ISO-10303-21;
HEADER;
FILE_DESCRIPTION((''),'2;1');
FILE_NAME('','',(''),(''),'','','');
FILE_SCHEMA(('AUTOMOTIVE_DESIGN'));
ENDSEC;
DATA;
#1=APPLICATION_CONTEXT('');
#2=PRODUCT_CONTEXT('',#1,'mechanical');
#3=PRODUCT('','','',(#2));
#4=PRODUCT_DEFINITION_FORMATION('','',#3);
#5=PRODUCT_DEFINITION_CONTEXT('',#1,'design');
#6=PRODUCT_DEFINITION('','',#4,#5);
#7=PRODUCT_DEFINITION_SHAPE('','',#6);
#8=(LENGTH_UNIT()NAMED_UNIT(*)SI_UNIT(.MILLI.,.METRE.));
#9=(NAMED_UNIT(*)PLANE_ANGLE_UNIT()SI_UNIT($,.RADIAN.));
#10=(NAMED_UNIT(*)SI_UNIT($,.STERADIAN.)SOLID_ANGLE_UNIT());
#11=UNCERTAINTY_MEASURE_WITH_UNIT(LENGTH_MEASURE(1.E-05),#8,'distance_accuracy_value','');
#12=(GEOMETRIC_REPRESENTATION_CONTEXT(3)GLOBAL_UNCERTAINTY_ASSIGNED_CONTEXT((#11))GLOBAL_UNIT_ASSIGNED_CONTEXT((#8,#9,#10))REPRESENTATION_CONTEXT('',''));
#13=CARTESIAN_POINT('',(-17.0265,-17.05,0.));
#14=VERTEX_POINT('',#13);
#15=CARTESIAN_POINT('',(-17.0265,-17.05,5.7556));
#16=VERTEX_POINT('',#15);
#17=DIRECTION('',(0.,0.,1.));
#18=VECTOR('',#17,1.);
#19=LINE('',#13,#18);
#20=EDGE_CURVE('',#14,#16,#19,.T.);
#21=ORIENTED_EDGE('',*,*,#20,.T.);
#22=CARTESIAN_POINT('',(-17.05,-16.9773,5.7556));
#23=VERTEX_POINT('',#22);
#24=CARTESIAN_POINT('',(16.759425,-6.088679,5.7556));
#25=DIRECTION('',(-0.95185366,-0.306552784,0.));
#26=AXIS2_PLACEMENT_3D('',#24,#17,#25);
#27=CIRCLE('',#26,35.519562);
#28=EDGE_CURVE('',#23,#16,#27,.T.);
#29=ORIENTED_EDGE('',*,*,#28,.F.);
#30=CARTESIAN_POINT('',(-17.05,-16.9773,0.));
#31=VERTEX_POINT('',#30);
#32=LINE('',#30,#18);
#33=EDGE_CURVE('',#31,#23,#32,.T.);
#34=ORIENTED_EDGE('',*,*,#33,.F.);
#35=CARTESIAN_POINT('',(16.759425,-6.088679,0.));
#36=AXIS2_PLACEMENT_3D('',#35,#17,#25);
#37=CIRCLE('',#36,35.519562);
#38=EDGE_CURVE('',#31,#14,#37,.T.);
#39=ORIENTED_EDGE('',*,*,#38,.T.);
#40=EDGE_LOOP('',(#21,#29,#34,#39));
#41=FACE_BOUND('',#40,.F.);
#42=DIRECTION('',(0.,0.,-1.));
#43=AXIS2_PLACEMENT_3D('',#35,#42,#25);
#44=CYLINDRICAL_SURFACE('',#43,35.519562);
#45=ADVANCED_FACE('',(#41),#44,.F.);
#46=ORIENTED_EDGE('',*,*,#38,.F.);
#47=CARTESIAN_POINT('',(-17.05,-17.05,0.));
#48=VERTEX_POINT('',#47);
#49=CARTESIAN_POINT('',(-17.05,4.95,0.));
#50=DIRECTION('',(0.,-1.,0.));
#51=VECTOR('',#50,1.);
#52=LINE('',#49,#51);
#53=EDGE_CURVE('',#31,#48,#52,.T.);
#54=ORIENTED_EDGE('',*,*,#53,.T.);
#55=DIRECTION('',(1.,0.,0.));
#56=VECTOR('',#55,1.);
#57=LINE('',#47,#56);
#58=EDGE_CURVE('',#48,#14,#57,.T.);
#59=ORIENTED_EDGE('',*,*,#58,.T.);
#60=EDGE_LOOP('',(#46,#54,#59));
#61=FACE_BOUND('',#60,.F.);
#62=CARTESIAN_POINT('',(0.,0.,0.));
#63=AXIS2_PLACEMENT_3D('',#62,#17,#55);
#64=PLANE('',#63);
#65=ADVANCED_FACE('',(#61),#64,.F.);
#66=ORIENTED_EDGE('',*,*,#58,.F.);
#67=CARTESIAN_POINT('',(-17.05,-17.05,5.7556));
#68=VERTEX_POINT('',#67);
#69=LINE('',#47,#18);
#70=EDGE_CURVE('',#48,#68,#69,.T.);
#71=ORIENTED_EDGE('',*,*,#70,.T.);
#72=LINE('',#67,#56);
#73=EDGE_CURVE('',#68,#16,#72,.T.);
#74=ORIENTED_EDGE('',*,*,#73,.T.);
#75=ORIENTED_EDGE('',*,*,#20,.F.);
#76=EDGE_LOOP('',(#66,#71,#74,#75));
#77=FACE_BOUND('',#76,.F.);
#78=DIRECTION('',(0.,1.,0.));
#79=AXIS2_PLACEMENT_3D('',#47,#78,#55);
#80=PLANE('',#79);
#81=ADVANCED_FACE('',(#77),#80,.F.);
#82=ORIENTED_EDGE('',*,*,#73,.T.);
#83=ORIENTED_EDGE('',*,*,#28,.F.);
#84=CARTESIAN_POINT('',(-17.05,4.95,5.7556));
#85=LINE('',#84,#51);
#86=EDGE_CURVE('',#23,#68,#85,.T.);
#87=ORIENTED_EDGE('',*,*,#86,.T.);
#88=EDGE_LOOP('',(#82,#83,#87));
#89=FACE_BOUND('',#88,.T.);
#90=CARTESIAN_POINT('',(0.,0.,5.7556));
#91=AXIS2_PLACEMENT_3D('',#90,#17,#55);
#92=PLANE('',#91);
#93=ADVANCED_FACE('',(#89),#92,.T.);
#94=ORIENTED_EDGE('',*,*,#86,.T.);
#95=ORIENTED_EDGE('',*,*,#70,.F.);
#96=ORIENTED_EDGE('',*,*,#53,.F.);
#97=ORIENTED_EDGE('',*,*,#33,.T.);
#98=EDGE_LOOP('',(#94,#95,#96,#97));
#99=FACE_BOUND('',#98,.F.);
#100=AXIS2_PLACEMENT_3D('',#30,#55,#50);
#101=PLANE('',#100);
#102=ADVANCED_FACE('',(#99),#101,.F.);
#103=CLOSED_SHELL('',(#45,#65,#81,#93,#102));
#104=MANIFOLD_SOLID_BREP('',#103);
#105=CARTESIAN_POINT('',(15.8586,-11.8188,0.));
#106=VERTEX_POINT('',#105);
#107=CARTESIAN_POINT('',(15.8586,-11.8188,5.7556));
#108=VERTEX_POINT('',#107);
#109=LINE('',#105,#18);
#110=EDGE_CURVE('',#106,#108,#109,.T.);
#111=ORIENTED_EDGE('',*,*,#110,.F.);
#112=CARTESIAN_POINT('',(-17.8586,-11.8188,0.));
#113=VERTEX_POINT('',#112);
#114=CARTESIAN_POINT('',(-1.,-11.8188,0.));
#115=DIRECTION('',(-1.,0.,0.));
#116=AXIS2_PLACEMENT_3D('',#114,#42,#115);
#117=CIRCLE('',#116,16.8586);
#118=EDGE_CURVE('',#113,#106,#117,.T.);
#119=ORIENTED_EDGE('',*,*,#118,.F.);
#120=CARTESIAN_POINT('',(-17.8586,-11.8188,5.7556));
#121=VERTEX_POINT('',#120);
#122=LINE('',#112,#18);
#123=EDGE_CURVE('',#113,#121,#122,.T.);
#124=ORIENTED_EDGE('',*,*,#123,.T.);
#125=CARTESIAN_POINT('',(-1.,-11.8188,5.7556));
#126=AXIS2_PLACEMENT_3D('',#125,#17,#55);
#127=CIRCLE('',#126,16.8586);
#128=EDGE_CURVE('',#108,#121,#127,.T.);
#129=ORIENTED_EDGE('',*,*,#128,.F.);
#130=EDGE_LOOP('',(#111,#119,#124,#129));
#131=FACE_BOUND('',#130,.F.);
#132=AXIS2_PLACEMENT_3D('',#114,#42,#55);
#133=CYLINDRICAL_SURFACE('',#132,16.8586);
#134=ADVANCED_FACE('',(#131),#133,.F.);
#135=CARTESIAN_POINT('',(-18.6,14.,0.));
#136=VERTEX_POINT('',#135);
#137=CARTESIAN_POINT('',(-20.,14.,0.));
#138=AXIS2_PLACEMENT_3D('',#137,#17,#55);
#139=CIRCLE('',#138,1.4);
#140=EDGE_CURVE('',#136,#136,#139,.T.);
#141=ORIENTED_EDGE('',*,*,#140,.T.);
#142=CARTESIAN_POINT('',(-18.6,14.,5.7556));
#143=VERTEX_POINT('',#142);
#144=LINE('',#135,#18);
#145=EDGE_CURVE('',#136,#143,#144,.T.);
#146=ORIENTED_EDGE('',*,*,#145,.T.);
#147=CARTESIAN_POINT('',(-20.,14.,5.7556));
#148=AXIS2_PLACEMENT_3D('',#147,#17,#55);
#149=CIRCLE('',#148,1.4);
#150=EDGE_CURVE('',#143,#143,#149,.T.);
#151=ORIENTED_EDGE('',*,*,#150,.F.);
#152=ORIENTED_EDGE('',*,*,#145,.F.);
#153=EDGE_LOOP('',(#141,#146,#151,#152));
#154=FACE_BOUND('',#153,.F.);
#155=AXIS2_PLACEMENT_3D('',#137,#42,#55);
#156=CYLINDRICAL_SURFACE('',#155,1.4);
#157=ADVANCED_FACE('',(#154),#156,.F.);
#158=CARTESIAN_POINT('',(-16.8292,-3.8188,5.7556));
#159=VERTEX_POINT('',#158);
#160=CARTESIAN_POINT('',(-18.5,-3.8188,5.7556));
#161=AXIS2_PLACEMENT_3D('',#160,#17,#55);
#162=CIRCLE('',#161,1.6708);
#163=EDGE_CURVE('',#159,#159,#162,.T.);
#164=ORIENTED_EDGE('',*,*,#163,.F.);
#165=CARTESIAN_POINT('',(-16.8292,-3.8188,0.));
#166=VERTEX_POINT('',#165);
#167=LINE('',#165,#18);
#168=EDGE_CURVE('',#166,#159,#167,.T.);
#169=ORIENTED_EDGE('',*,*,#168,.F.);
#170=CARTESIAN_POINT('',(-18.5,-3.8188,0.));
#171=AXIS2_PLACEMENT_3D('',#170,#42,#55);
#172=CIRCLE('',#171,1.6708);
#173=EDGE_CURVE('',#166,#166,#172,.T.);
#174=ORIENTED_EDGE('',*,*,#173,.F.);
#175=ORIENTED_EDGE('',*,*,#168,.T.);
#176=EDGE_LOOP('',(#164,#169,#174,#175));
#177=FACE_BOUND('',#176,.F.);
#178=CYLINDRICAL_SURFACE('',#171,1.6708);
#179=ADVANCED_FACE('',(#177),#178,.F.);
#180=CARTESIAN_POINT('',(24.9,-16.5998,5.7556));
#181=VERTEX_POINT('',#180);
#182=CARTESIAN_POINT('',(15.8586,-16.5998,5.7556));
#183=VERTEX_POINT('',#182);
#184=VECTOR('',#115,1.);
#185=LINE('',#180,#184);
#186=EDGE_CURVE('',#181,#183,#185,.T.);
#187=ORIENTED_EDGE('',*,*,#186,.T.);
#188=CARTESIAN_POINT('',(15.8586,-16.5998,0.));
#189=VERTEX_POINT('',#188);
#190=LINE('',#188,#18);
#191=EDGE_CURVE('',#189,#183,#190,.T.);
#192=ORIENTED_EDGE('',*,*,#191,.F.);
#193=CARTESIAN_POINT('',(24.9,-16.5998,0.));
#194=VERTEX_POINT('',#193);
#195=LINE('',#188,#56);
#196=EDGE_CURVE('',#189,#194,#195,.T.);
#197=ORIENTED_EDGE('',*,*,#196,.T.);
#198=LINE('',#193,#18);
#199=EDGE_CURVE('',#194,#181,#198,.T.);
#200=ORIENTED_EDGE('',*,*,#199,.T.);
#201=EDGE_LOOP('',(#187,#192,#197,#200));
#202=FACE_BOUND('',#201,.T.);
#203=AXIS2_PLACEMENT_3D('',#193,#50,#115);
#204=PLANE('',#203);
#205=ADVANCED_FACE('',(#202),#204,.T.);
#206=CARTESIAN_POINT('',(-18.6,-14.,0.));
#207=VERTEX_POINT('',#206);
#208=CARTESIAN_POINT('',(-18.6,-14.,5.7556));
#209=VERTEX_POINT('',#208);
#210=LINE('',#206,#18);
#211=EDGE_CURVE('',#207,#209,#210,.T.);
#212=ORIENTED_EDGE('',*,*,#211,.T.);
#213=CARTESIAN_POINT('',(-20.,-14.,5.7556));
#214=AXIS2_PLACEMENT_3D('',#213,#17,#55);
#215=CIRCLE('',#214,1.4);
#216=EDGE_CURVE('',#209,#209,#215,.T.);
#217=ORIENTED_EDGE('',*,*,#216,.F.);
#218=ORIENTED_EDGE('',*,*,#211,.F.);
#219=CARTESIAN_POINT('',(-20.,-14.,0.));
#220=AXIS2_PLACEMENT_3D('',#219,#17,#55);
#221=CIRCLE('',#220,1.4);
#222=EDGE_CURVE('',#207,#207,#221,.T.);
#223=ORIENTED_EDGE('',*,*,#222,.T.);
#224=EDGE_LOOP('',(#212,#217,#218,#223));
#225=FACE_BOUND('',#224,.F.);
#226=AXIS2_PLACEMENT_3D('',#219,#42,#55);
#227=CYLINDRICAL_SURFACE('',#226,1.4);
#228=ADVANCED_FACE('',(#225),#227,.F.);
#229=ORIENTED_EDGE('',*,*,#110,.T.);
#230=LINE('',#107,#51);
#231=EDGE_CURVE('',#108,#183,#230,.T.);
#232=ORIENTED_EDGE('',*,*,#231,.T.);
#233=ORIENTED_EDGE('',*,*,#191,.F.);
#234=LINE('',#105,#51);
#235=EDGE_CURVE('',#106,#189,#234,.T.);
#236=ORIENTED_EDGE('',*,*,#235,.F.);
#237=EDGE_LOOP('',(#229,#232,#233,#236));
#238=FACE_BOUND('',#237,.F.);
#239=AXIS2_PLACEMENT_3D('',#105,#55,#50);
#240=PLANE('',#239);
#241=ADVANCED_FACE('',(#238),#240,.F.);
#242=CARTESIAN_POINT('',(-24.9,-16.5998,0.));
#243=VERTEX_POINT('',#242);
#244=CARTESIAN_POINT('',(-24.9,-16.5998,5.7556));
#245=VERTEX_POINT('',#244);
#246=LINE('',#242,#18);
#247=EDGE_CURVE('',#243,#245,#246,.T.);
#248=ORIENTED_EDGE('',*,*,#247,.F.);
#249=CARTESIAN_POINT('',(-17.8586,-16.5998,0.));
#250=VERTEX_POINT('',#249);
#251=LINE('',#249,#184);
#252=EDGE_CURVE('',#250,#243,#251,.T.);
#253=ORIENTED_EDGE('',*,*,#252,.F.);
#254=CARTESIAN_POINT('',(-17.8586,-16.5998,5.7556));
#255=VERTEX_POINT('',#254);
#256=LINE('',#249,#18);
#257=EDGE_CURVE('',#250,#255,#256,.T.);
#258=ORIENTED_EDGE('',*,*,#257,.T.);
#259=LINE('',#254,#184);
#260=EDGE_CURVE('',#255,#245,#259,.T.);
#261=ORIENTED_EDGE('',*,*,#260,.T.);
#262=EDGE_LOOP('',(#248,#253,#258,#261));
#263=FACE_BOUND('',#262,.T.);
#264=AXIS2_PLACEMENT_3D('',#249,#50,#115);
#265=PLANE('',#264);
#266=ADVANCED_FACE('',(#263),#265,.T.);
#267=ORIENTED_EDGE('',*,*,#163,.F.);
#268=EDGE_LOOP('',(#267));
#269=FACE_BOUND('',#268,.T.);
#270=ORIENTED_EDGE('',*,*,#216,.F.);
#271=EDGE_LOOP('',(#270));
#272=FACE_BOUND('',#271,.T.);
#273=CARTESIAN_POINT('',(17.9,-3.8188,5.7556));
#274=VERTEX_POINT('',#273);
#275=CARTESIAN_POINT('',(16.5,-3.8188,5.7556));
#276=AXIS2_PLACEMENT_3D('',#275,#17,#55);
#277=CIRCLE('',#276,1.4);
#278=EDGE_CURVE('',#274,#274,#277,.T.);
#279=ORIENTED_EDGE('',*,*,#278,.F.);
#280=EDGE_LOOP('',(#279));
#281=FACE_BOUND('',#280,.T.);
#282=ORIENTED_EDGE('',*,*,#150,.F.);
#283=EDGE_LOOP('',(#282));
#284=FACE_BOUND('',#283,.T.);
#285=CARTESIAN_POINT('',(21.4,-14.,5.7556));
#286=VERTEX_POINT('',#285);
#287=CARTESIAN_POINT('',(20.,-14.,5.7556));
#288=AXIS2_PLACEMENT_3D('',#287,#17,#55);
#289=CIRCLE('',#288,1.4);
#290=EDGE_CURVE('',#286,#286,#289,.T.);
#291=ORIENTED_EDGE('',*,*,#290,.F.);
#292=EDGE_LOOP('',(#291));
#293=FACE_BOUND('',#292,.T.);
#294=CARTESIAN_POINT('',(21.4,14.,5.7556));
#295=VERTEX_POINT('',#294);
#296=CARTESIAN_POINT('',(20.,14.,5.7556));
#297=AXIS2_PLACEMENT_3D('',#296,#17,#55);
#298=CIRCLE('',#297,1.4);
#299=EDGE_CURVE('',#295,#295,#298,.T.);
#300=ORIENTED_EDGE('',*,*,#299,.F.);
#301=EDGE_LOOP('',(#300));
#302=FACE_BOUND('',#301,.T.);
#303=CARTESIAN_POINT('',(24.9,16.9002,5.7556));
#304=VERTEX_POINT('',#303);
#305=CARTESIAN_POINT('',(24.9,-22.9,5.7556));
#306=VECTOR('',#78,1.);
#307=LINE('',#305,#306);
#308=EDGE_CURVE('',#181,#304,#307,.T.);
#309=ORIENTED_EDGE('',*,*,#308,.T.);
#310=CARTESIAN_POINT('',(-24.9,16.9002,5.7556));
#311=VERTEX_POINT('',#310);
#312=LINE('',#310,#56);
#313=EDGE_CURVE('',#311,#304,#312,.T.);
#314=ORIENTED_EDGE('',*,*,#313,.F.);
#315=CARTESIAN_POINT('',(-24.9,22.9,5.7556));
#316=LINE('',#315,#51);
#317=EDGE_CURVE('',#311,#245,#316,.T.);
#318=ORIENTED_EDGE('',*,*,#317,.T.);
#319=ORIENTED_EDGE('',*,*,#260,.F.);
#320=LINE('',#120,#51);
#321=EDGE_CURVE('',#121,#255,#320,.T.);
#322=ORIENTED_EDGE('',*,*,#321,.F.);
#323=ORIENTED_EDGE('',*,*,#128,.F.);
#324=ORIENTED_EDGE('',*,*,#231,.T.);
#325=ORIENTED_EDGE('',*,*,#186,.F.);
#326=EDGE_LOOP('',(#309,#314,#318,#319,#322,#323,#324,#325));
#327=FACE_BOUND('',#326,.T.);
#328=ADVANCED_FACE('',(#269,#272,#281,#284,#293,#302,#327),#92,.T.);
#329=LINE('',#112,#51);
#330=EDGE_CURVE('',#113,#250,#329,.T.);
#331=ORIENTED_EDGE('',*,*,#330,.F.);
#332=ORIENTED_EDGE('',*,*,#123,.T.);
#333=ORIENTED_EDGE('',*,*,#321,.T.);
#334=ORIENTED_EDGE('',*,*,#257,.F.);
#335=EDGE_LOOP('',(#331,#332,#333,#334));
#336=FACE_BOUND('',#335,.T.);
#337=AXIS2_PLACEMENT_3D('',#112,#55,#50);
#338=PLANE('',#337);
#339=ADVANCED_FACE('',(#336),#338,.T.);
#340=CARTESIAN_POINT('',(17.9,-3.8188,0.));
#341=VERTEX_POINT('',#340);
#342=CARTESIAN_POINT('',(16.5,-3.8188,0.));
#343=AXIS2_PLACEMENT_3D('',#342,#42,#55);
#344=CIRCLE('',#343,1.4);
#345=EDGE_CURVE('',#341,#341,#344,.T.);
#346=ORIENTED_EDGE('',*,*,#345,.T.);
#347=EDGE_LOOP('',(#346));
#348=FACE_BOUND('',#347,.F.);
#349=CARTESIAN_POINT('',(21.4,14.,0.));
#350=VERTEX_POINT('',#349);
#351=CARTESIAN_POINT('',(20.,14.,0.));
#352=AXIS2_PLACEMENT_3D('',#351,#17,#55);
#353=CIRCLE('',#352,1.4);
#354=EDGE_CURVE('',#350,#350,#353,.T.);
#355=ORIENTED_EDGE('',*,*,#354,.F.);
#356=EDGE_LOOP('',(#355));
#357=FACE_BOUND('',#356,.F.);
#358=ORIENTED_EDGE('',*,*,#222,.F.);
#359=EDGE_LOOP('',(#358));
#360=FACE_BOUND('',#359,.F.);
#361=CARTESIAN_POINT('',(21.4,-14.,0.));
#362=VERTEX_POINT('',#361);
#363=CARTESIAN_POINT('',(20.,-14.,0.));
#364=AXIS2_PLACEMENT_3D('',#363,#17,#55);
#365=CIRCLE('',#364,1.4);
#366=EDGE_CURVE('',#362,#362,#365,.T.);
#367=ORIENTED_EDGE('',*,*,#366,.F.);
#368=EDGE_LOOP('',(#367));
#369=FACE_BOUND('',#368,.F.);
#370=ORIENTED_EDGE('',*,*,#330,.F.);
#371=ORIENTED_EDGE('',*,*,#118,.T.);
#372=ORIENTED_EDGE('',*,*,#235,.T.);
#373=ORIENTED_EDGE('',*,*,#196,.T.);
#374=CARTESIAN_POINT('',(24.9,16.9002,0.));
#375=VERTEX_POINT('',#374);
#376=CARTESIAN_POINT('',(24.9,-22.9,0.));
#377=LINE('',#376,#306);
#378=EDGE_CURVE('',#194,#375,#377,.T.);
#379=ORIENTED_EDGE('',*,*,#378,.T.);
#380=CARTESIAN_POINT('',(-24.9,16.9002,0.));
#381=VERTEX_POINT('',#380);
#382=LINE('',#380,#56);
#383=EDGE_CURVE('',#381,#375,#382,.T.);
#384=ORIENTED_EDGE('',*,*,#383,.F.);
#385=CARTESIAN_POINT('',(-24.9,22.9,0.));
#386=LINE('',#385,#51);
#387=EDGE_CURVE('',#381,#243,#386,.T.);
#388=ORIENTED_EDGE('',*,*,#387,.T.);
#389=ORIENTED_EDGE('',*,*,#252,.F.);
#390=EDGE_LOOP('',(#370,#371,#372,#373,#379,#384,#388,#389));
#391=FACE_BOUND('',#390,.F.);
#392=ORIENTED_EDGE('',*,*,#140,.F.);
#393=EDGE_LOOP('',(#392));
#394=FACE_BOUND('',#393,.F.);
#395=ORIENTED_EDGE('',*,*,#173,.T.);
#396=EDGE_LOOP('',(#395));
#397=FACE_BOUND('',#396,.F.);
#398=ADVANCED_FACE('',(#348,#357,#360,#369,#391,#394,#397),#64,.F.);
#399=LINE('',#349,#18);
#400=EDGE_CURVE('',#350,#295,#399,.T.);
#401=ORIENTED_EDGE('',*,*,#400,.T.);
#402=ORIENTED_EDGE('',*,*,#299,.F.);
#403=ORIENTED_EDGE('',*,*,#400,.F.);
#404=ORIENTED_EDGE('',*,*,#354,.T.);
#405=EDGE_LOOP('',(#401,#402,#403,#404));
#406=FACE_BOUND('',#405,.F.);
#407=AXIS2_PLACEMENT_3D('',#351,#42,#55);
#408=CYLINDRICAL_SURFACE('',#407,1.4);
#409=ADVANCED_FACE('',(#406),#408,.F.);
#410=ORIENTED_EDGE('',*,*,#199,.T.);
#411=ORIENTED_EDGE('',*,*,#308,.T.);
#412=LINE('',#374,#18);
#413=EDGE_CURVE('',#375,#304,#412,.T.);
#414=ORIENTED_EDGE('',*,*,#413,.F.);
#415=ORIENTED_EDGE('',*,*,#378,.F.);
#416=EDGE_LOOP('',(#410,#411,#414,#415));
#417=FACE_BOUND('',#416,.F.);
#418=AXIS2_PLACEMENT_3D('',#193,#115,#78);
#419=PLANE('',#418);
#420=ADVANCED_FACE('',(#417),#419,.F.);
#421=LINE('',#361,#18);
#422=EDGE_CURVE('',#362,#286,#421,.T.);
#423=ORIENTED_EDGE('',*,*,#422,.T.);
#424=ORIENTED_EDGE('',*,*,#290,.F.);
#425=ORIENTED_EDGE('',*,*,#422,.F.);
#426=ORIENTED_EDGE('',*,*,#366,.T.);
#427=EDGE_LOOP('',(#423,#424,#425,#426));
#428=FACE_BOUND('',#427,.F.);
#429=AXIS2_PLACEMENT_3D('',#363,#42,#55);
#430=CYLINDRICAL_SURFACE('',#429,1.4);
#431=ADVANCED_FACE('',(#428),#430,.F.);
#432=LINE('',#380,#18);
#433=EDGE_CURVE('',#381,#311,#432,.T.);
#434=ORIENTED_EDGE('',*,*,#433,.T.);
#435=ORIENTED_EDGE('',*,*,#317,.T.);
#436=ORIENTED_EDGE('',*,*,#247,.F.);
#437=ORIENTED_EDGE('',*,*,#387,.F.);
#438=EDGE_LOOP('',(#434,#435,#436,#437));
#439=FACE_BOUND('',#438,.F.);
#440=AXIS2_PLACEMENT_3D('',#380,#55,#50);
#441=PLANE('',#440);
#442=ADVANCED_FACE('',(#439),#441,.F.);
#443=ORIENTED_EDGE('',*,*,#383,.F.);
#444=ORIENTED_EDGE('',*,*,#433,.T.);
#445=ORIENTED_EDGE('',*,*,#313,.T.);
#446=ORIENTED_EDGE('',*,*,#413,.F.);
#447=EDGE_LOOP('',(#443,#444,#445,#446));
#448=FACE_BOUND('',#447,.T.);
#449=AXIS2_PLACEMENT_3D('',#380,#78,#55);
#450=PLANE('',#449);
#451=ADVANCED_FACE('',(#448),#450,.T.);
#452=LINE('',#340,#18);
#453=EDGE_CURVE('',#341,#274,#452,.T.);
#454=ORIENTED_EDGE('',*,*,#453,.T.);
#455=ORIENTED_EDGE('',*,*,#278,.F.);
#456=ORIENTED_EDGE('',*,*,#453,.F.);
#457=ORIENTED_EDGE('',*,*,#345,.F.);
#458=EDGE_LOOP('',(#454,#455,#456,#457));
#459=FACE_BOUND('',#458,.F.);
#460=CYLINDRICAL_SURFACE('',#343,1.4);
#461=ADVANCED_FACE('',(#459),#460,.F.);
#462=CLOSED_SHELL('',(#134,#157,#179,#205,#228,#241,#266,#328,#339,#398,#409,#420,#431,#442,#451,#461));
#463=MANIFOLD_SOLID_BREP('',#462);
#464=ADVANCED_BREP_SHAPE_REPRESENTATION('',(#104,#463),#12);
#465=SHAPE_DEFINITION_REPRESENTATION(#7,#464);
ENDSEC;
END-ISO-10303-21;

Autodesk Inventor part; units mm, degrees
ref_plane "YZ Plane" through (0, 0, 0) normal (1, 0, 0) x (0, 1, 0)
ref_plane "Work Plane1" through (0, 0, 0) normal (0, 0, 1) x (1, 0, 0)
sketch "Sketch1" plane through (0, 0, 0) normal (0, 0, 1) x (1, 0, 0)
  circle A0 centre (-20, 14) radius 1.4 projected
  circle A1 centre (-20, -14) radius 1.4 projected
  circle A2 centre (20, -14) radius 1.4 projected
  circle A3 centre (20, 14) radius 1.4 projected
  line L0 (-24.9, 22.9) -> (-24.9, -22.9) projected
  line L1 (24.9, -22.9) -> (24.9, 22.9) projected
  line L2 (-24.9, 16.9002) -> (24.9, 16.9002)
  line L3 (24.9, 16.9002) -> (24.9, -16.5998)
  line L4 (-24.9, -16.5998) -> (-24.9, 16.9002)
  line L5 (-17.05, -17.05) -> (-17.05, 17.05) construction
  line L6 (17.05, 17.05) -> (17.05, -17.05) construction
  line L7 (-17.05, -17.05) -> (17.05, -17.05)
  line L8 (17.05, -17.05) -> (17.05, 4.95)
  line L9 (-17.05, 4.95) -> (-17.05, -17.05)
  circle A4 centre (-1, -11.8188) radius 15.5 construction
  line L10 (15.8586, -11.8188) -> (15.8586, -16.5998)
  line L11 (-17.8586, -11.8188) -> (-17.8586, -16.5998)
  arc A5 (15.8586, -11.8188) -> (-17.8586, -11.8188) centre (-1, -11.8188) ccw
  arc A6 (-17.05, -16.9773) -> (-17.0265, -17.05) centre (-1, -11.8188) ccw
  line L12 (24.9, -16.5998) -> (15.8586, -16.5998)
  line L13 (-17.8586, -16.5998) -> (-24.9, -16.5998)
  arc A7 (14.4, -3.8188) -> (18.6, -3.8188) centre (16.5, -3.8188) ccw construction
  arc A8 (-20.6, -3.8188) -> (-16.4, -3.8188) centre (-18.5, -3.8188) ccw construction
  circle A9 centre (-18.5, -3.8188) radius 1.6708
  circle A10 centre (16.5, -3.8188) radius 1.4
  dimension "d0" = 33.5
  dimension "d1" = 22
  dimension "d4" = 2.8
  dimension "d5" = 0
ref_plane "Work Plane2" through (-22, -17.8188, 7.2556) normal (0, 0, 1) x (1, 0, 0)
ref_plane "Work Plane3" through (-22, -17.8188, 5.7556) normal (0, 0, 1) x (1, 0, 0)
extrude "Extrusion1" add sketch "Sketch1" along normal up to surface (5.7556 mm away) contours L2 L1 L12 L10 A5 L11 L13 L0 | A6 L7 L9
properties part number "20_Cube_Insert_Beamsplittercube_motorized_motormount"
